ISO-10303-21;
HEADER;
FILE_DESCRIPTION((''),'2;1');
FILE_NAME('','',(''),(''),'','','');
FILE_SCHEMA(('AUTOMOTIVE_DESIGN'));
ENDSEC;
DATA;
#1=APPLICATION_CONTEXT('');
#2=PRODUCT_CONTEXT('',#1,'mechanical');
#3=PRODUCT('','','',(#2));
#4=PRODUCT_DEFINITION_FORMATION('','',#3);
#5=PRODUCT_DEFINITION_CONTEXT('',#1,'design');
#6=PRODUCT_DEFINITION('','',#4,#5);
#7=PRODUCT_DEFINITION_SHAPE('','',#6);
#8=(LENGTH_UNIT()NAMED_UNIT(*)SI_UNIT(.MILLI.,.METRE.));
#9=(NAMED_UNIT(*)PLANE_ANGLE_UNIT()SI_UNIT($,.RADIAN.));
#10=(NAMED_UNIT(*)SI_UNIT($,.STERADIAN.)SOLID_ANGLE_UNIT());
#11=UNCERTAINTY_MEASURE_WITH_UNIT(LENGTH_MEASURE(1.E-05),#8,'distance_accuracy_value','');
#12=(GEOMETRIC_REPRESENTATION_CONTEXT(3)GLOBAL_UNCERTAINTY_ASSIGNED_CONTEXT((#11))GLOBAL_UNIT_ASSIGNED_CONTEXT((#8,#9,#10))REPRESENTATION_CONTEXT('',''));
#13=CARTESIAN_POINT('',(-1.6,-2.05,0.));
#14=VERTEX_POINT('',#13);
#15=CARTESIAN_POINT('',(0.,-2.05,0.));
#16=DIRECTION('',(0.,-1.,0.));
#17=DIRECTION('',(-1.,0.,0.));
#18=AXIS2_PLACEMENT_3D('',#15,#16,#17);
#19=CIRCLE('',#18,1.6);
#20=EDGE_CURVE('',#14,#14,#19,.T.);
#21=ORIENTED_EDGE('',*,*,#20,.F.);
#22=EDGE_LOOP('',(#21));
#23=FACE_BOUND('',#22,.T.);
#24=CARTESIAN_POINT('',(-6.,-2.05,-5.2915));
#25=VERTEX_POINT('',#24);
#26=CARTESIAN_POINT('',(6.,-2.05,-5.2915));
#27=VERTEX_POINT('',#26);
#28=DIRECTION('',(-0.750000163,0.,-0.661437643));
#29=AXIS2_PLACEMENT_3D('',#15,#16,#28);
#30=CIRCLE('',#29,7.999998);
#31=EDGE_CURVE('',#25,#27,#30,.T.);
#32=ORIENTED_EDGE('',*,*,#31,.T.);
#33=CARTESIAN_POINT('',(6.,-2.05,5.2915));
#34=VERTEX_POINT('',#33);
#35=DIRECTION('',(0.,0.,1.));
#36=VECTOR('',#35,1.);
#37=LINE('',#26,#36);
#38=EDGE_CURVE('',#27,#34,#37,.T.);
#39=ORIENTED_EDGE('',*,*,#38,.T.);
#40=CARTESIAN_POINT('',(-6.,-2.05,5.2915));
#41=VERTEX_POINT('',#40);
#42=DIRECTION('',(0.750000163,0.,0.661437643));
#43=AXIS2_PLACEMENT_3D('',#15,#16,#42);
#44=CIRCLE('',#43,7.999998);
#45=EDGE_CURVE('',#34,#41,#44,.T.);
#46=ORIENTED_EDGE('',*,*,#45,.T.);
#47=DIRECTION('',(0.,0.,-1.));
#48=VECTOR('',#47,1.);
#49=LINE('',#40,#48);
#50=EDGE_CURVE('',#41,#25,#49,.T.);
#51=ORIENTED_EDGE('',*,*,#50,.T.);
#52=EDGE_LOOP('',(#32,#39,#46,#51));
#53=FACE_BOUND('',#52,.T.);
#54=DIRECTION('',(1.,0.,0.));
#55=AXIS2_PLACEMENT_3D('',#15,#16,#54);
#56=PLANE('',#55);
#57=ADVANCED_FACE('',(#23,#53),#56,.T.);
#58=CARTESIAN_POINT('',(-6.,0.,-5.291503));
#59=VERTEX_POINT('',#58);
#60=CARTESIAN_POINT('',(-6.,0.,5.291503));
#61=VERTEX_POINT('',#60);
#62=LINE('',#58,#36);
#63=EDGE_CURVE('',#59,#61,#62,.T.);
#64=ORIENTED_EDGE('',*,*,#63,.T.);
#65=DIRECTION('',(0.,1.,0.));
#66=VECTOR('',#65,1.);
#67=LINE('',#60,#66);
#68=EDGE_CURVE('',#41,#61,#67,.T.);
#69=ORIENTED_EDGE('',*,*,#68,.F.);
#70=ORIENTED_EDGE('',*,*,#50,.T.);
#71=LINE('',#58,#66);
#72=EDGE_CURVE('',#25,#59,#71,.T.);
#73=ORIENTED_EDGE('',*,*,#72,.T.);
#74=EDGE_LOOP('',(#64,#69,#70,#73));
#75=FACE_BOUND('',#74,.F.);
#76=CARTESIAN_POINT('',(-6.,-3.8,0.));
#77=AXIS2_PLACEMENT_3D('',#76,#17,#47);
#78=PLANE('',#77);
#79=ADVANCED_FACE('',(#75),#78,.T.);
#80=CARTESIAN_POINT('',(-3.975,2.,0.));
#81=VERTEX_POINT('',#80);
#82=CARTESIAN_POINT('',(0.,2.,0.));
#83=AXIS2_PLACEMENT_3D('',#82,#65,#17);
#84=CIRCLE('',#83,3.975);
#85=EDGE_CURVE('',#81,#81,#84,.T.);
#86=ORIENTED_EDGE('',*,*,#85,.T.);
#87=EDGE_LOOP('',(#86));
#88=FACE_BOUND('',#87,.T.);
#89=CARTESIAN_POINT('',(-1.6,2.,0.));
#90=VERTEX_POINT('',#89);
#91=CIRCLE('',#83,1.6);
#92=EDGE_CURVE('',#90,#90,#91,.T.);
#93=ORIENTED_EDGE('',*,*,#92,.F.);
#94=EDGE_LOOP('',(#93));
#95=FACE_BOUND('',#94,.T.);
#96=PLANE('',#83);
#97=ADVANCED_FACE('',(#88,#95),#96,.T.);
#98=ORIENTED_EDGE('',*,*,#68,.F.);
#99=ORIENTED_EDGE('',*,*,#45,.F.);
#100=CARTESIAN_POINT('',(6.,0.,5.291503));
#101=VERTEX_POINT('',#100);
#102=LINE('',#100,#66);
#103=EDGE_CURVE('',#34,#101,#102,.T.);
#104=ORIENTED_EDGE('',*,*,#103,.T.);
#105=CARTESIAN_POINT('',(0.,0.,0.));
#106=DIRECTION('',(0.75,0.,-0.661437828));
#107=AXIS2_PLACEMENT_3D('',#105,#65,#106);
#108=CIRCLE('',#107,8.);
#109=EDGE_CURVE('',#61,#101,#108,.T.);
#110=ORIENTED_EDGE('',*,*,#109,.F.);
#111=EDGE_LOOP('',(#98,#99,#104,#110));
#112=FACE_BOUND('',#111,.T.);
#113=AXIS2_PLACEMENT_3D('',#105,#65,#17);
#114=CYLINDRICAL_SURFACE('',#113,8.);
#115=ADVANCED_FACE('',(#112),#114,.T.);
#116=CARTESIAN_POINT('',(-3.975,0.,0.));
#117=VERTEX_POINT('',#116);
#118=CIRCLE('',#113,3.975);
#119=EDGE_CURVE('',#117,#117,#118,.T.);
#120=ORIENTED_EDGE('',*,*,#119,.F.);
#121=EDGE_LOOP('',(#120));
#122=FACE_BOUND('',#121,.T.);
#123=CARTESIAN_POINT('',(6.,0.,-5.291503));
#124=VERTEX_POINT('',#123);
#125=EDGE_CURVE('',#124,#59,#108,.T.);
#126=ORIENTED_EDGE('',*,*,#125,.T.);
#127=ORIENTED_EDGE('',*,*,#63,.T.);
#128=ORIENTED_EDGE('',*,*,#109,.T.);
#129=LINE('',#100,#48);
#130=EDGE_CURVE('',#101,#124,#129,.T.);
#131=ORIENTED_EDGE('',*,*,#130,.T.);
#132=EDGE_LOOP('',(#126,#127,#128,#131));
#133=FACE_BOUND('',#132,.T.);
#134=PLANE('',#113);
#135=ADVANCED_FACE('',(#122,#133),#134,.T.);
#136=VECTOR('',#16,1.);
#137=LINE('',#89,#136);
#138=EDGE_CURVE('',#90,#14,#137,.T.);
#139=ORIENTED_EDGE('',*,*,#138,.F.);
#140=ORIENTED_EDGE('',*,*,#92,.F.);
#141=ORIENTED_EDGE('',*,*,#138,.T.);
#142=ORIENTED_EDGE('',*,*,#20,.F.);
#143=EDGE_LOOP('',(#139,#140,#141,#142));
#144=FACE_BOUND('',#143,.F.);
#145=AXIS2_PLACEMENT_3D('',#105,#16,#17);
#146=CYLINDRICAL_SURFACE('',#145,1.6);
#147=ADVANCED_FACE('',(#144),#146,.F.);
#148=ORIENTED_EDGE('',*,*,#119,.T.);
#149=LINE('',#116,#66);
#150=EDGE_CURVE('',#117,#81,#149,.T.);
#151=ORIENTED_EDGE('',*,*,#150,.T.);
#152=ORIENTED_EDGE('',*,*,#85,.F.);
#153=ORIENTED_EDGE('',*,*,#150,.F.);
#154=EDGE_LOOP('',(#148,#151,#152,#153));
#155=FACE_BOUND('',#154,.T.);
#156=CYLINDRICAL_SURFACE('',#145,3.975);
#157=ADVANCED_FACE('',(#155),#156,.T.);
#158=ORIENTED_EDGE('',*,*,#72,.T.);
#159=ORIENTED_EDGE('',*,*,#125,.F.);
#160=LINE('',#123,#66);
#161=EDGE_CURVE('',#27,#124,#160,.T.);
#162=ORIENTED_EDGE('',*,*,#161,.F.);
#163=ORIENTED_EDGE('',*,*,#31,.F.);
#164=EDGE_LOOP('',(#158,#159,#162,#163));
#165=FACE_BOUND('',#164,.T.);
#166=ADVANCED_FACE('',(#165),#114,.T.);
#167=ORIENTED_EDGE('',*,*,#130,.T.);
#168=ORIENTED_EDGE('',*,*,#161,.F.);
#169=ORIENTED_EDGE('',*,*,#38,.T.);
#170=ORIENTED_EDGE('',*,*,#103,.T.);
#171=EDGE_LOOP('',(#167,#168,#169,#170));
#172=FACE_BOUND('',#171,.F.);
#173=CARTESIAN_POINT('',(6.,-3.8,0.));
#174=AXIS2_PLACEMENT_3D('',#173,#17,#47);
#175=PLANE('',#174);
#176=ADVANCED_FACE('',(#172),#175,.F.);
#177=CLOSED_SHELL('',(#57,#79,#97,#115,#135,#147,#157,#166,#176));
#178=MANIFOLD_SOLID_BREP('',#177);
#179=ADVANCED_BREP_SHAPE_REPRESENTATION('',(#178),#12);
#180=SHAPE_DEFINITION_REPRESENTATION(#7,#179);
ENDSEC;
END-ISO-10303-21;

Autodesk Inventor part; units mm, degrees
ref_plane "YZ Plane" through (0, 0, 0) normal (1, 0, 0) x (0, 1, 0)
ref_plane "XZ Plane" through (0, 0, 0) normal (0, 1, 0) x (-1, 0, 0)
ref_plane "XY Plane" through (0, 0, 0) normal (0, 0, 1) x (1, 0, 0)
sketch "Sketch1" plane through (0, 0, 0) normal (0, 1, 0) x (-1, 0, 0)
  circle A0 centre (0, 0) radius 3.975
  circle A1 centre (0, 0) radius 1.6
  circle A2 centre (0, 0) radius 8
  dimension "d0" = 7.95
  dimension "d1" = 3.2
  dimension "d2" = 16
extrude "Extrusion1" add sketch "Sketch1" along normal blind 2 contours A0
extrude "Extrusion2" add sketch "Sketch1" against normal blind 3.8 contours A0 | A2
sketch "Sketch3" plane through (0, -3.8, 0) normal (0, -1, 0) x (1, 0, 0)
  line L0 (8, 0) -> (6, 0) construction
  line L1 (6, 0) -> (6, -6.7165)
  line L2 (6, 0) -> (6, 8)
  line L3 (6, 8) -> (11.3207, 8)
  line L4 (11.3207, 8) -> (13.7407, -4.0569)
  line L5 (13.7407, -4.0569) -> (10.7642, -6.413)
  line L6 (10.7642, -6.413) -> (6, -6.7165)
  dimension "d11" = 2
extrude "Extrusion4" cut sketch "Sketch3" against normal blind 6.75
mirror "Mirror1" about plane through (0, 0, 0) normal (1, 0, 0) of "Extrusion4"
sketch "Sketch4" plane through (0, -3.8, 0) normal (0, -1, 0) x (1, 0, 0)
  line L0 (-6, 5.2915) -> (-6, -5.2915) projected
  arc A0 (-6, -5.2915) -> (6, -5.2915) centre (0, 0) ccw projected
  line L1 (6, -5.2915) -> (6, 5.2915) projected
  arc A1 (6, 5.2915) -> (-6, 5.2915) centre (0, 0) ccw projected
  circle A2 centre (0, 0) radius 1.6 projected
extrude "Extrusion5" cut sketch "Sketch4" against normal blind 1.75
properties part number "C-Channel Spacer M3"
